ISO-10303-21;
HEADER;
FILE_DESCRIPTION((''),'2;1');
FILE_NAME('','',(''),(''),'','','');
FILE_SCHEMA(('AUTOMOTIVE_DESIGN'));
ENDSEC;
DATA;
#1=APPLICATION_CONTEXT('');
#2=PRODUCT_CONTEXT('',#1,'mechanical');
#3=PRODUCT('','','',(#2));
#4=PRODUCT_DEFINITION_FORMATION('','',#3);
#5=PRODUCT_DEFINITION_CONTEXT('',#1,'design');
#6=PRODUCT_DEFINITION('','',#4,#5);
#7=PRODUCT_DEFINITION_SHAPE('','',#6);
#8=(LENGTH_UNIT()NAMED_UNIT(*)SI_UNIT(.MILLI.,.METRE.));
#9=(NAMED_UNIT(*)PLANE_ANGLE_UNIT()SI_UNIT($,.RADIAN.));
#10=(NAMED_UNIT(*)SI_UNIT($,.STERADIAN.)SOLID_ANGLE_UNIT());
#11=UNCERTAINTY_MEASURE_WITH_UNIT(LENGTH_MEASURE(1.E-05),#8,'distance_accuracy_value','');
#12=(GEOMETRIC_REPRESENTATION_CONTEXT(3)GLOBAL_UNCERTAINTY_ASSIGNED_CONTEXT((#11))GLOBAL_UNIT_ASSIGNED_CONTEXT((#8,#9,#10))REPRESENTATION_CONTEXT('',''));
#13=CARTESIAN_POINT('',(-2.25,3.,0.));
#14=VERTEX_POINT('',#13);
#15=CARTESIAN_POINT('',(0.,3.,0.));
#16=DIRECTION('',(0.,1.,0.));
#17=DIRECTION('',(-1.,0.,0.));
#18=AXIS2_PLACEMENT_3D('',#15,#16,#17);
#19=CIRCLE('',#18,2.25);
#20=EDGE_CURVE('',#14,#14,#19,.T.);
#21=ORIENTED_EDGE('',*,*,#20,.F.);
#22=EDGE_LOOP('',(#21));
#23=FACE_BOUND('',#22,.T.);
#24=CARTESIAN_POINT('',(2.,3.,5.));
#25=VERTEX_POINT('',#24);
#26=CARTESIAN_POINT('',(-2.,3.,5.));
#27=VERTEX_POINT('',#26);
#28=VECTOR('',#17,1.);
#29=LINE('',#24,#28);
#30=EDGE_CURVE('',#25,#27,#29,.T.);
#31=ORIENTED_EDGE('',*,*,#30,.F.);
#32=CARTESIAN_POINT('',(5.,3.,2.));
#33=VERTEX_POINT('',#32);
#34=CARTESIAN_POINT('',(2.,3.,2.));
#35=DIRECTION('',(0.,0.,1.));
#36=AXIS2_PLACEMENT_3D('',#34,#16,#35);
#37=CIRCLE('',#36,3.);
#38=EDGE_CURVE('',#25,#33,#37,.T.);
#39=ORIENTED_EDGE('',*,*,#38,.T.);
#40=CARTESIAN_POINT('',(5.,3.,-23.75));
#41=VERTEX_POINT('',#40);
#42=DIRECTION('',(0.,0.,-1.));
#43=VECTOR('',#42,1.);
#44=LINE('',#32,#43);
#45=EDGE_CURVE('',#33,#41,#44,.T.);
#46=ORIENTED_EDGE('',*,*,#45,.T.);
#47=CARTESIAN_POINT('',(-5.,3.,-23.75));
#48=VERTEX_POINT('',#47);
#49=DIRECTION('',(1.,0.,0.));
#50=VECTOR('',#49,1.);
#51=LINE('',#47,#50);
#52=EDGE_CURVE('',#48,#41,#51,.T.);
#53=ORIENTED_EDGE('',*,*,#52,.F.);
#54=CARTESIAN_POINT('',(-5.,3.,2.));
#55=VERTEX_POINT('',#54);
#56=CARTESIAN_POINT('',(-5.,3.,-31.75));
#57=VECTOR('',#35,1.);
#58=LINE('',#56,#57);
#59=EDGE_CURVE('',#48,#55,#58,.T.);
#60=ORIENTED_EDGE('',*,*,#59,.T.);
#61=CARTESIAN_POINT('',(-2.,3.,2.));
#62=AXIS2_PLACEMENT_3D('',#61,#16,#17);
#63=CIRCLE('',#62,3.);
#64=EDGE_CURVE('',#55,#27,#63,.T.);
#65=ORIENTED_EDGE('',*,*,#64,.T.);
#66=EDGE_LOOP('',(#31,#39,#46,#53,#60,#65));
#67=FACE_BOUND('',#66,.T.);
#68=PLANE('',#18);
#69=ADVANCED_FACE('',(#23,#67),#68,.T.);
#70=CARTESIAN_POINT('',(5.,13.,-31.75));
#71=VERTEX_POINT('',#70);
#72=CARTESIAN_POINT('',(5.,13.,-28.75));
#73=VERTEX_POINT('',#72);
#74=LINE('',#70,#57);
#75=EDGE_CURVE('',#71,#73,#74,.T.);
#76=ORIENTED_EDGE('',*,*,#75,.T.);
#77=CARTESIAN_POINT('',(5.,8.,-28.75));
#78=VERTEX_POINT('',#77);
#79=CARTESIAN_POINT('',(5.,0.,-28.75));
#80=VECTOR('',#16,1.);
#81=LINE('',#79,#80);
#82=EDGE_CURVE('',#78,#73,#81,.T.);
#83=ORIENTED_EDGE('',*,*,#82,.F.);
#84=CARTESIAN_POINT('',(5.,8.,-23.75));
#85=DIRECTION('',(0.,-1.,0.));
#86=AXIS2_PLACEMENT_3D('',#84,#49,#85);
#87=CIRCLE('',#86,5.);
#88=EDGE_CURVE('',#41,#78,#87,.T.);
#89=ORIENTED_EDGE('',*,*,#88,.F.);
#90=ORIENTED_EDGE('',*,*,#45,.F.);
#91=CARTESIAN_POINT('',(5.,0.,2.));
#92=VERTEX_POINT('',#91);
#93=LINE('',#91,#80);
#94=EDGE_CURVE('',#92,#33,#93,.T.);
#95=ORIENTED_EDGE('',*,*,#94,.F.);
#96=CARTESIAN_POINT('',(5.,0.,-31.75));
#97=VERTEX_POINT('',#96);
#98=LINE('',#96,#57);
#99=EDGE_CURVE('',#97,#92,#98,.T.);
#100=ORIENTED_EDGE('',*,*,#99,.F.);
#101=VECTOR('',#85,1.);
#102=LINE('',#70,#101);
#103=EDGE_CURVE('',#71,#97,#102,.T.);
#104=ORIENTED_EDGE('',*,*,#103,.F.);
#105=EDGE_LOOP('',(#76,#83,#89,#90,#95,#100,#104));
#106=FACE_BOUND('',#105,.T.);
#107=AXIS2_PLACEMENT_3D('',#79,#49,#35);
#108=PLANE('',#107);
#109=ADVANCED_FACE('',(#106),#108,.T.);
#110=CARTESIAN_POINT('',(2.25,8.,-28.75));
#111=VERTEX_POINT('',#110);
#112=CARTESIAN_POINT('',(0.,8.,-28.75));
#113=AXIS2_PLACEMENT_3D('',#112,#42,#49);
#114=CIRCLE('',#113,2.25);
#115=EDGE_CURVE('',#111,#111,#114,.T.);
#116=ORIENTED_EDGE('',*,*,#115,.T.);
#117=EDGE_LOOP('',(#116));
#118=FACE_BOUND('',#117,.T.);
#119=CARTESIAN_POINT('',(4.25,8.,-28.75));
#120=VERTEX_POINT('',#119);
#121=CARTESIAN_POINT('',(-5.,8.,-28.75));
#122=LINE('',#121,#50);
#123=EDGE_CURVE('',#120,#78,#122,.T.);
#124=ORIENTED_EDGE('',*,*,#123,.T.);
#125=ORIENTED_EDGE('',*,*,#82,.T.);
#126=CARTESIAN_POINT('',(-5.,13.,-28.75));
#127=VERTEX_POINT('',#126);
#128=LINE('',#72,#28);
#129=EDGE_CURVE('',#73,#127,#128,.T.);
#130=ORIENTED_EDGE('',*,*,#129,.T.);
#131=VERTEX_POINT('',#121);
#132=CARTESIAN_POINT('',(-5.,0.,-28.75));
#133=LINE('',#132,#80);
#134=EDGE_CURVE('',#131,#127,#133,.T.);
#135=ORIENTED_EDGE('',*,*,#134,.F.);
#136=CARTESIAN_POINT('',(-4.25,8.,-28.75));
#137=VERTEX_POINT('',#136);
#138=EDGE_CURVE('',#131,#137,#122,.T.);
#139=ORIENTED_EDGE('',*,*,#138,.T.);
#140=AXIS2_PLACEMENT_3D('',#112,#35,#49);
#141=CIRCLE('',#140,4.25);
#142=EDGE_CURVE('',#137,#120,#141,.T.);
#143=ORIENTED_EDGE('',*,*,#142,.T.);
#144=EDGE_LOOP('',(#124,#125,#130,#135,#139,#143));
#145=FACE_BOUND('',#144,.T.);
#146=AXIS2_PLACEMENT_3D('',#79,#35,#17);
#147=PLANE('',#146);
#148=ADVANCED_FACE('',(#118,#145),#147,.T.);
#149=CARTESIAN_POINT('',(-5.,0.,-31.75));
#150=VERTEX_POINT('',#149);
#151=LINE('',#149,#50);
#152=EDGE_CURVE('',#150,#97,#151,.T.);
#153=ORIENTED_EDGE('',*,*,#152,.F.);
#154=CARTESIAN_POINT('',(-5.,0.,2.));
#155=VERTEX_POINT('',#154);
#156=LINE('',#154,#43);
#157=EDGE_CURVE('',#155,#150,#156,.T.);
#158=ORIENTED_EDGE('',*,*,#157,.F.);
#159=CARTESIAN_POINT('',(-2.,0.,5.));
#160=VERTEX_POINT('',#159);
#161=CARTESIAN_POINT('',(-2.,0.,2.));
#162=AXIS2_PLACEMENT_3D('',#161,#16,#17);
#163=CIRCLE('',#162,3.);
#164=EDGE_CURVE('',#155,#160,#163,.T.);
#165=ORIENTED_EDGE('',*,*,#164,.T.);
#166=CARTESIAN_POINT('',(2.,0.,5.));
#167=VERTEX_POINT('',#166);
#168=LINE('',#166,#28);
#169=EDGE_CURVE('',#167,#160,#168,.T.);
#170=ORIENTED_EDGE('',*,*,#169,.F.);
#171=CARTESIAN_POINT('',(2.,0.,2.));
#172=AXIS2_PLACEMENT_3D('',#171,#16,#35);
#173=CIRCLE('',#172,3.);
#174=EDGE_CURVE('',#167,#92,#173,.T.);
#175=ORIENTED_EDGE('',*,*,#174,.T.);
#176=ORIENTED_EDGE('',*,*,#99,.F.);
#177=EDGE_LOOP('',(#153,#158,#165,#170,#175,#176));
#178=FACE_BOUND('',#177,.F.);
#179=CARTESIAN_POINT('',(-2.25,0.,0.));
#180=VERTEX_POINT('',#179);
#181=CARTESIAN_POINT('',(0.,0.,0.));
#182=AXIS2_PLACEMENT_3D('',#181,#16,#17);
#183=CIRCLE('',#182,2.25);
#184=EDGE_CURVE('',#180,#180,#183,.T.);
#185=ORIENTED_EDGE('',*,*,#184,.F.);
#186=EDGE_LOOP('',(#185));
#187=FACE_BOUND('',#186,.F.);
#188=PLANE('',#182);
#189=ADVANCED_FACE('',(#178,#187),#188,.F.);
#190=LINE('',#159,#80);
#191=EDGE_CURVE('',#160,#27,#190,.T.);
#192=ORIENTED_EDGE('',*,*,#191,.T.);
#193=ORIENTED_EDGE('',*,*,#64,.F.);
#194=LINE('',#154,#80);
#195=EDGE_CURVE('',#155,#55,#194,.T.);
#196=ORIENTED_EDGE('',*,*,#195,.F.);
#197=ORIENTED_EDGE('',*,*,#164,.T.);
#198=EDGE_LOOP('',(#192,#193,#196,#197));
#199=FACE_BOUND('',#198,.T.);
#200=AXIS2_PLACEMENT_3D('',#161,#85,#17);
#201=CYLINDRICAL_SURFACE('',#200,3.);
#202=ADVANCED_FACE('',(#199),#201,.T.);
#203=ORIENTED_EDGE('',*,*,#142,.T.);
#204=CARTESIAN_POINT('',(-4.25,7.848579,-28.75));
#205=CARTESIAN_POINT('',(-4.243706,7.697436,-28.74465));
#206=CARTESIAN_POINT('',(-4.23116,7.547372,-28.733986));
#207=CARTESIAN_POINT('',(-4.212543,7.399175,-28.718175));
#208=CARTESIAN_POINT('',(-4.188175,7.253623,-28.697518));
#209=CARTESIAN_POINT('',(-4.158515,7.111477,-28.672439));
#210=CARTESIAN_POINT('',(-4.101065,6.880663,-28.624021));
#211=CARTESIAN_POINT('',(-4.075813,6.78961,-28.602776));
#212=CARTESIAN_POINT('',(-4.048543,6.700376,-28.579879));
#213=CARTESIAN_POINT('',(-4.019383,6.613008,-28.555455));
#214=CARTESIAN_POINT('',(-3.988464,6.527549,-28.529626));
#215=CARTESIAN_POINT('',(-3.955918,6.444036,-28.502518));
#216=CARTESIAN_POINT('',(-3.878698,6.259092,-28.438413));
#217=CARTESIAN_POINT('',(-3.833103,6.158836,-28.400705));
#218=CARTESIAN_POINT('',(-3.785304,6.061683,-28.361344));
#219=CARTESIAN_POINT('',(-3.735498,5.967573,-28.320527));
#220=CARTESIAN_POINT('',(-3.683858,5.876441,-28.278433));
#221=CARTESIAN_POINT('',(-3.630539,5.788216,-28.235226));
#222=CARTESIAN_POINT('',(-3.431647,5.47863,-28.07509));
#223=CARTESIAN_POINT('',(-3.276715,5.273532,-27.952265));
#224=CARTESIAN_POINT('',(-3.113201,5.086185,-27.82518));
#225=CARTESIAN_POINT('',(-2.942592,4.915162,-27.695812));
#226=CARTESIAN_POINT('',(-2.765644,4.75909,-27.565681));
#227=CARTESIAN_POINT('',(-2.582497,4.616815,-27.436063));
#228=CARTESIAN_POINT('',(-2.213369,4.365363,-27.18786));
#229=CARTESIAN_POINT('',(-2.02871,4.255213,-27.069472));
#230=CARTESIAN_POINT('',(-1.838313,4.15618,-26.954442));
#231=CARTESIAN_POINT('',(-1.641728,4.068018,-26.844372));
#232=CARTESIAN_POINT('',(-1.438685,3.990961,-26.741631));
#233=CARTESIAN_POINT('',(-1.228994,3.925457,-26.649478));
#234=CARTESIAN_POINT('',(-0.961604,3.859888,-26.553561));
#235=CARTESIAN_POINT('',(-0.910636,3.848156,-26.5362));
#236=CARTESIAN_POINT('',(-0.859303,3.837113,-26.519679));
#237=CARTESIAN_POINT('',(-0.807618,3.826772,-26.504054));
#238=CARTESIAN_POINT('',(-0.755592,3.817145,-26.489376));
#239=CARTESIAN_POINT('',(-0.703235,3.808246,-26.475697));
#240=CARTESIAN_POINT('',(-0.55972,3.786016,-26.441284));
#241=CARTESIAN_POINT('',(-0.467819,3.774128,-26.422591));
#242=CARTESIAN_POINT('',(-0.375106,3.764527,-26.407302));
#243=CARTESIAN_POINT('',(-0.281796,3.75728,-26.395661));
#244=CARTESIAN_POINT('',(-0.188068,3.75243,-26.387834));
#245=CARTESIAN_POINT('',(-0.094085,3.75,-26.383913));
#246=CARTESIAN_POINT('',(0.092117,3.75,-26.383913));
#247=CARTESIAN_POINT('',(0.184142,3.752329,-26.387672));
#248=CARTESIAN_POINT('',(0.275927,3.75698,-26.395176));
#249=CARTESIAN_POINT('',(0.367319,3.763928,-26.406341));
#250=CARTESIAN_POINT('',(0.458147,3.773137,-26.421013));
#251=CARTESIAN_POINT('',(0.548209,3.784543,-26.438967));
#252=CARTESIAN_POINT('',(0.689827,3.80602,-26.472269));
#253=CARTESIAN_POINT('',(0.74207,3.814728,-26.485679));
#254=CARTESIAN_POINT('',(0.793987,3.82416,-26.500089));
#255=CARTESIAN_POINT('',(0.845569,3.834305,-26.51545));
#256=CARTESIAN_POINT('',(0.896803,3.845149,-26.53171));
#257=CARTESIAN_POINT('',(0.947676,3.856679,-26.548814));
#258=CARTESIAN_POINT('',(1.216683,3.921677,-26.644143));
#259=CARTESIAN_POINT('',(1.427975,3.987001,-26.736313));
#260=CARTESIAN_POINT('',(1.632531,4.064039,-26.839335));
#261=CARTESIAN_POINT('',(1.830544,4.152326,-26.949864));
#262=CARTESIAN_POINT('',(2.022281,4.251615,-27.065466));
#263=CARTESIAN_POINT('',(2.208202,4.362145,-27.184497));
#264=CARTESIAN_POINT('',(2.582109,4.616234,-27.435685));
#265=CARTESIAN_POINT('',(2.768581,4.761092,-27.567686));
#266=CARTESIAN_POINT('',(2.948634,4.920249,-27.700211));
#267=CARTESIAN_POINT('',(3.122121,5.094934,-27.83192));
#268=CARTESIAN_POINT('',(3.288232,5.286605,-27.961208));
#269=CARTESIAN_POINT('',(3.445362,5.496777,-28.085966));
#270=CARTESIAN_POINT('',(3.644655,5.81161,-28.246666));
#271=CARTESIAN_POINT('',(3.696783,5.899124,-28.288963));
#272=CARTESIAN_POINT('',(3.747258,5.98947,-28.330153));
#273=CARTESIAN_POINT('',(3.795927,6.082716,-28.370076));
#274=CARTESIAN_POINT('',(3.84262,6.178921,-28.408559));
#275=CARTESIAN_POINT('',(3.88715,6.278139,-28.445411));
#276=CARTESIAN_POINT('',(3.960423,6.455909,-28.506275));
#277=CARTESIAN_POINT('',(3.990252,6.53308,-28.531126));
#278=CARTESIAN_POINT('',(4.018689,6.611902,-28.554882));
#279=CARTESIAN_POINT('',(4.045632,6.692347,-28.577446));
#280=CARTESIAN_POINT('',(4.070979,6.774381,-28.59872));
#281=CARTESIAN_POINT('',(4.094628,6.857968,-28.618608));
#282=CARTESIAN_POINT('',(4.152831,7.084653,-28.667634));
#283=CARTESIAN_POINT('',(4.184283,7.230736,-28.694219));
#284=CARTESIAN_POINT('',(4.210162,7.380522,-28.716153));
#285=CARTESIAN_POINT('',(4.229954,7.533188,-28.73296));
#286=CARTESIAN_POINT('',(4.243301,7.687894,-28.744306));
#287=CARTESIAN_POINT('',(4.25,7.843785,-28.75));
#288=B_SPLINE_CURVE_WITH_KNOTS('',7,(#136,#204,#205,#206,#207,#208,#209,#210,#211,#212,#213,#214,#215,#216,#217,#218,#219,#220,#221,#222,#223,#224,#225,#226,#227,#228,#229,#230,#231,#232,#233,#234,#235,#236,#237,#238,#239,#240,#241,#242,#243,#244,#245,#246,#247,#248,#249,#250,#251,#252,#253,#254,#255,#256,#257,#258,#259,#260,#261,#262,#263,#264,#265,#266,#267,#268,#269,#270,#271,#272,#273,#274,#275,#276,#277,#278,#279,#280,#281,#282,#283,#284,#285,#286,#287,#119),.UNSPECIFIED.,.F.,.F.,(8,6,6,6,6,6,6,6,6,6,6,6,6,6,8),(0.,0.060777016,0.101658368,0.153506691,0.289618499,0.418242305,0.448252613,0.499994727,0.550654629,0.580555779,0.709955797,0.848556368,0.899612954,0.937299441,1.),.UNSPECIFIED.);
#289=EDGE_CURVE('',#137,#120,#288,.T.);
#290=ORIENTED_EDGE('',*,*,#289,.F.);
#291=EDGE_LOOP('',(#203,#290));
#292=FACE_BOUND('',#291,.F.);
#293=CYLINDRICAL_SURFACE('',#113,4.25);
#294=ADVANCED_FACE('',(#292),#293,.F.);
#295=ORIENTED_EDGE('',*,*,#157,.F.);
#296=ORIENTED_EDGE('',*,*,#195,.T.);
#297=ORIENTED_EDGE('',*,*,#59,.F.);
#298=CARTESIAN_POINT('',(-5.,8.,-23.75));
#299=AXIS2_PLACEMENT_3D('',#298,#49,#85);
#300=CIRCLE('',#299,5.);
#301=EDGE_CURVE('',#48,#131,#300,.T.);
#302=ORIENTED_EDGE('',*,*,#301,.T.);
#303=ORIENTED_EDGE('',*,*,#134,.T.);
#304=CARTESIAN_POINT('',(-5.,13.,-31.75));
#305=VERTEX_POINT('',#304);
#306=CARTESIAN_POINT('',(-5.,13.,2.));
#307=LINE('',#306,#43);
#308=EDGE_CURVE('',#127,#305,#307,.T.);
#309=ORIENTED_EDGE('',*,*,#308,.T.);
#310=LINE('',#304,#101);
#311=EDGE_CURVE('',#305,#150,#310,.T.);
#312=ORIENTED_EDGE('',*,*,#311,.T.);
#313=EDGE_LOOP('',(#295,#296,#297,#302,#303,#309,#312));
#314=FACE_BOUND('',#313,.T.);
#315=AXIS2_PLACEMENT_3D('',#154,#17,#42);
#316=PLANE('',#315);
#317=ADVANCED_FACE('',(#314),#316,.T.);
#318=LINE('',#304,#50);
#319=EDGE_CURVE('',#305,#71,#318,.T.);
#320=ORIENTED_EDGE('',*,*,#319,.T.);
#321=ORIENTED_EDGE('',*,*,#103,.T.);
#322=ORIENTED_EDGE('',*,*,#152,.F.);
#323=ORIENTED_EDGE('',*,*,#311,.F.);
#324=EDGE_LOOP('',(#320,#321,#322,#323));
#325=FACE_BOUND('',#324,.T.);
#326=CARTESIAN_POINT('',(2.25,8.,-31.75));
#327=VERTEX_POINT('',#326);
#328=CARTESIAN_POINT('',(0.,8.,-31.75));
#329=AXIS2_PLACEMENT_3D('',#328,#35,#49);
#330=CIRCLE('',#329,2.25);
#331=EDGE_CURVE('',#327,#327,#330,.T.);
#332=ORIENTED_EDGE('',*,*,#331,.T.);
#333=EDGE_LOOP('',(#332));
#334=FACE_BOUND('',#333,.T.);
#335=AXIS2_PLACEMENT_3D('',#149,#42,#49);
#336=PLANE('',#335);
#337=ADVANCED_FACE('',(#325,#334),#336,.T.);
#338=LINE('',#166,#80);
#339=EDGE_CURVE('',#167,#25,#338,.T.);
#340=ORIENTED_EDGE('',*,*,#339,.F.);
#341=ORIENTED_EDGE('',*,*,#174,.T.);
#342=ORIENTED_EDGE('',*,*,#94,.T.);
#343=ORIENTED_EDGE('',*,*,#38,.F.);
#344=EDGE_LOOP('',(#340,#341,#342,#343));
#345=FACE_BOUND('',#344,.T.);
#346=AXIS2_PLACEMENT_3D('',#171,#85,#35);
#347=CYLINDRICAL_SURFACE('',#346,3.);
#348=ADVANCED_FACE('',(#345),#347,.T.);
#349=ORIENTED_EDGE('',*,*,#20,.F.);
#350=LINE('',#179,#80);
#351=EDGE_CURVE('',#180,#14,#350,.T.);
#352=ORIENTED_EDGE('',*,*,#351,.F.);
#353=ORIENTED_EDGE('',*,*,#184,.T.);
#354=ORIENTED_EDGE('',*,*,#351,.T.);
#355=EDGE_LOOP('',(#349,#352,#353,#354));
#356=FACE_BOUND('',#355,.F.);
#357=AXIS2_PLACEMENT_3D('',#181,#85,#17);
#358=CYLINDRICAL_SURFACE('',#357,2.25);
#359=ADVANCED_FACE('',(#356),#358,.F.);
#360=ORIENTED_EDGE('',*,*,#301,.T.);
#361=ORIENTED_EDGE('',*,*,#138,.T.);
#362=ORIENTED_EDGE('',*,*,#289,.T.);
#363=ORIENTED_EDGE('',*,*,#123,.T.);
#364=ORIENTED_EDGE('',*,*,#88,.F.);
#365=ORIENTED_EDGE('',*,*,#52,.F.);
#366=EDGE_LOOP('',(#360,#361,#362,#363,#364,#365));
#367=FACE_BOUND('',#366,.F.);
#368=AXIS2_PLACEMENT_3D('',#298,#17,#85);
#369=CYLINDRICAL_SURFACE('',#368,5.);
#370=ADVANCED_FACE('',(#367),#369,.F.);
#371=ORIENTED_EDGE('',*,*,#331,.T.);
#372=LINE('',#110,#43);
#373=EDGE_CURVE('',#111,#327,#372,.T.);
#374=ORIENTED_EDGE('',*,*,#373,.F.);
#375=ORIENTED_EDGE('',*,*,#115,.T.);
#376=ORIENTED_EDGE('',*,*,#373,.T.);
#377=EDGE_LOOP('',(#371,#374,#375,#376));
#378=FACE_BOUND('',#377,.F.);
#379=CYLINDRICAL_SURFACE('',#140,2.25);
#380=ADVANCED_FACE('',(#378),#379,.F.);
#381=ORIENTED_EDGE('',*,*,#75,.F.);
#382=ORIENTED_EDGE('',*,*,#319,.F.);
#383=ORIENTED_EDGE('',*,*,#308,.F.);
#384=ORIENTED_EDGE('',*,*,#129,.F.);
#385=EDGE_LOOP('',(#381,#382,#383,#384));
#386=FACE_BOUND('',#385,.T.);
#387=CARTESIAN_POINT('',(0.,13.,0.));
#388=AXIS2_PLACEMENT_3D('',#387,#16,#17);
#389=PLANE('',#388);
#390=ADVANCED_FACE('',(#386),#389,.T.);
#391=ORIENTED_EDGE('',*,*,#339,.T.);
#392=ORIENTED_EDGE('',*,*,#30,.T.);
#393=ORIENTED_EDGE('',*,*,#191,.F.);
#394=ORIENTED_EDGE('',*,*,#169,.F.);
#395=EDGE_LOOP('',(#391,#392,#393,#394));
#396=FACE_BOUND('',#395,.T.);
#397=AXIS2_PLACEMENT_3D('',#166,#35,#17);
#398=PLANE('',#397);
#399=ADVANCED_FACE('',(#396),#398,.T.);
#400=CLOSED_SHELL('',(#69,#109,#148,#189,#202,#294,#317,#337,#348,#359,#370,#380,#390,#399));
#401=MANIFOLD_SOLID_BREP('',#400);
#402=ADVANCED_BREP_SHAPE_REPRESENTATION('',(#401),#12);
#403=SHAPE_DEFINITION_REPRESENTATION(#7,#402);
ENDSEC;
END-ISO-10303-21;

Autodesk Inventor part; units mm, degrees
ref_plane "YZ Plane" through (0, 0, 0) normal (1, 0, 0) x (0, 1, 0)
ref_plane "XZ Plane" through (0, 0, 0) normal (0, 1, 0) x (-1, 0, 0)
ref_plane "XY Plane" through (0, 0, 0) normal (0, 0, 1) x (1, 0, 0)
sketch "Sketch1" plane through (0, 0, 0) normal (0, 1, 0) x (-1, 0, 0)
  circle A0 centre (0, 0) radius 2.25
  line L0 (-2, 5) -> (2, 5)
  line L1 (5, 2) -> (5, -31.75)
  line L2 (5, -31.75) -> (-5, -31.75)
  line L3 (-5, -31.75) -> (-5, 2)
  line L4 (-5, -28.75) -> (5, -28.75)
  arc A1 (-2, 5) -> (-5, 2) centre (-2, 2) ccw
  arc A2 (5, 2) -> (2, 5) centre (2, 2) ccw
  point P0 (-5, 5)
  point P1 (5, 5)
  dimension "d0" = 4.5
  dimension "d3" = 5
  dimension "d4" = 10
  dimension "d5" = 36.75
  dimension "d6" = 3
  dimension "d9" = 3
extrude "Extrusion1" add sketch "Sketch1" along normal blind 3
extrude "Extrusion2" add sketch "Sketch1" along normal blind 13 contours L4 L1 L2 L3
sketch "Sketch2" plane through (-5, 3, -28.75) normal (0, 0, 1) x (1, 0, 0)
  circle A0 centre (5, 5) radius 2.25
  circle A1 centre (5, 5) radius 4.25
  point P0 (5, -3)
  dimension "d12" = 4.5
  dimension "d16" = 2
extrude "Extrusion3" cut sketch "Sketch2" against normal blind 4 contours A0
fillet "Fillet1" radius 5 1 edges at (0, 3, -28.75)
extrude "Extrusion4" cut sketch "Sketch2" along normal blind 4
properties part number "GearStand"
